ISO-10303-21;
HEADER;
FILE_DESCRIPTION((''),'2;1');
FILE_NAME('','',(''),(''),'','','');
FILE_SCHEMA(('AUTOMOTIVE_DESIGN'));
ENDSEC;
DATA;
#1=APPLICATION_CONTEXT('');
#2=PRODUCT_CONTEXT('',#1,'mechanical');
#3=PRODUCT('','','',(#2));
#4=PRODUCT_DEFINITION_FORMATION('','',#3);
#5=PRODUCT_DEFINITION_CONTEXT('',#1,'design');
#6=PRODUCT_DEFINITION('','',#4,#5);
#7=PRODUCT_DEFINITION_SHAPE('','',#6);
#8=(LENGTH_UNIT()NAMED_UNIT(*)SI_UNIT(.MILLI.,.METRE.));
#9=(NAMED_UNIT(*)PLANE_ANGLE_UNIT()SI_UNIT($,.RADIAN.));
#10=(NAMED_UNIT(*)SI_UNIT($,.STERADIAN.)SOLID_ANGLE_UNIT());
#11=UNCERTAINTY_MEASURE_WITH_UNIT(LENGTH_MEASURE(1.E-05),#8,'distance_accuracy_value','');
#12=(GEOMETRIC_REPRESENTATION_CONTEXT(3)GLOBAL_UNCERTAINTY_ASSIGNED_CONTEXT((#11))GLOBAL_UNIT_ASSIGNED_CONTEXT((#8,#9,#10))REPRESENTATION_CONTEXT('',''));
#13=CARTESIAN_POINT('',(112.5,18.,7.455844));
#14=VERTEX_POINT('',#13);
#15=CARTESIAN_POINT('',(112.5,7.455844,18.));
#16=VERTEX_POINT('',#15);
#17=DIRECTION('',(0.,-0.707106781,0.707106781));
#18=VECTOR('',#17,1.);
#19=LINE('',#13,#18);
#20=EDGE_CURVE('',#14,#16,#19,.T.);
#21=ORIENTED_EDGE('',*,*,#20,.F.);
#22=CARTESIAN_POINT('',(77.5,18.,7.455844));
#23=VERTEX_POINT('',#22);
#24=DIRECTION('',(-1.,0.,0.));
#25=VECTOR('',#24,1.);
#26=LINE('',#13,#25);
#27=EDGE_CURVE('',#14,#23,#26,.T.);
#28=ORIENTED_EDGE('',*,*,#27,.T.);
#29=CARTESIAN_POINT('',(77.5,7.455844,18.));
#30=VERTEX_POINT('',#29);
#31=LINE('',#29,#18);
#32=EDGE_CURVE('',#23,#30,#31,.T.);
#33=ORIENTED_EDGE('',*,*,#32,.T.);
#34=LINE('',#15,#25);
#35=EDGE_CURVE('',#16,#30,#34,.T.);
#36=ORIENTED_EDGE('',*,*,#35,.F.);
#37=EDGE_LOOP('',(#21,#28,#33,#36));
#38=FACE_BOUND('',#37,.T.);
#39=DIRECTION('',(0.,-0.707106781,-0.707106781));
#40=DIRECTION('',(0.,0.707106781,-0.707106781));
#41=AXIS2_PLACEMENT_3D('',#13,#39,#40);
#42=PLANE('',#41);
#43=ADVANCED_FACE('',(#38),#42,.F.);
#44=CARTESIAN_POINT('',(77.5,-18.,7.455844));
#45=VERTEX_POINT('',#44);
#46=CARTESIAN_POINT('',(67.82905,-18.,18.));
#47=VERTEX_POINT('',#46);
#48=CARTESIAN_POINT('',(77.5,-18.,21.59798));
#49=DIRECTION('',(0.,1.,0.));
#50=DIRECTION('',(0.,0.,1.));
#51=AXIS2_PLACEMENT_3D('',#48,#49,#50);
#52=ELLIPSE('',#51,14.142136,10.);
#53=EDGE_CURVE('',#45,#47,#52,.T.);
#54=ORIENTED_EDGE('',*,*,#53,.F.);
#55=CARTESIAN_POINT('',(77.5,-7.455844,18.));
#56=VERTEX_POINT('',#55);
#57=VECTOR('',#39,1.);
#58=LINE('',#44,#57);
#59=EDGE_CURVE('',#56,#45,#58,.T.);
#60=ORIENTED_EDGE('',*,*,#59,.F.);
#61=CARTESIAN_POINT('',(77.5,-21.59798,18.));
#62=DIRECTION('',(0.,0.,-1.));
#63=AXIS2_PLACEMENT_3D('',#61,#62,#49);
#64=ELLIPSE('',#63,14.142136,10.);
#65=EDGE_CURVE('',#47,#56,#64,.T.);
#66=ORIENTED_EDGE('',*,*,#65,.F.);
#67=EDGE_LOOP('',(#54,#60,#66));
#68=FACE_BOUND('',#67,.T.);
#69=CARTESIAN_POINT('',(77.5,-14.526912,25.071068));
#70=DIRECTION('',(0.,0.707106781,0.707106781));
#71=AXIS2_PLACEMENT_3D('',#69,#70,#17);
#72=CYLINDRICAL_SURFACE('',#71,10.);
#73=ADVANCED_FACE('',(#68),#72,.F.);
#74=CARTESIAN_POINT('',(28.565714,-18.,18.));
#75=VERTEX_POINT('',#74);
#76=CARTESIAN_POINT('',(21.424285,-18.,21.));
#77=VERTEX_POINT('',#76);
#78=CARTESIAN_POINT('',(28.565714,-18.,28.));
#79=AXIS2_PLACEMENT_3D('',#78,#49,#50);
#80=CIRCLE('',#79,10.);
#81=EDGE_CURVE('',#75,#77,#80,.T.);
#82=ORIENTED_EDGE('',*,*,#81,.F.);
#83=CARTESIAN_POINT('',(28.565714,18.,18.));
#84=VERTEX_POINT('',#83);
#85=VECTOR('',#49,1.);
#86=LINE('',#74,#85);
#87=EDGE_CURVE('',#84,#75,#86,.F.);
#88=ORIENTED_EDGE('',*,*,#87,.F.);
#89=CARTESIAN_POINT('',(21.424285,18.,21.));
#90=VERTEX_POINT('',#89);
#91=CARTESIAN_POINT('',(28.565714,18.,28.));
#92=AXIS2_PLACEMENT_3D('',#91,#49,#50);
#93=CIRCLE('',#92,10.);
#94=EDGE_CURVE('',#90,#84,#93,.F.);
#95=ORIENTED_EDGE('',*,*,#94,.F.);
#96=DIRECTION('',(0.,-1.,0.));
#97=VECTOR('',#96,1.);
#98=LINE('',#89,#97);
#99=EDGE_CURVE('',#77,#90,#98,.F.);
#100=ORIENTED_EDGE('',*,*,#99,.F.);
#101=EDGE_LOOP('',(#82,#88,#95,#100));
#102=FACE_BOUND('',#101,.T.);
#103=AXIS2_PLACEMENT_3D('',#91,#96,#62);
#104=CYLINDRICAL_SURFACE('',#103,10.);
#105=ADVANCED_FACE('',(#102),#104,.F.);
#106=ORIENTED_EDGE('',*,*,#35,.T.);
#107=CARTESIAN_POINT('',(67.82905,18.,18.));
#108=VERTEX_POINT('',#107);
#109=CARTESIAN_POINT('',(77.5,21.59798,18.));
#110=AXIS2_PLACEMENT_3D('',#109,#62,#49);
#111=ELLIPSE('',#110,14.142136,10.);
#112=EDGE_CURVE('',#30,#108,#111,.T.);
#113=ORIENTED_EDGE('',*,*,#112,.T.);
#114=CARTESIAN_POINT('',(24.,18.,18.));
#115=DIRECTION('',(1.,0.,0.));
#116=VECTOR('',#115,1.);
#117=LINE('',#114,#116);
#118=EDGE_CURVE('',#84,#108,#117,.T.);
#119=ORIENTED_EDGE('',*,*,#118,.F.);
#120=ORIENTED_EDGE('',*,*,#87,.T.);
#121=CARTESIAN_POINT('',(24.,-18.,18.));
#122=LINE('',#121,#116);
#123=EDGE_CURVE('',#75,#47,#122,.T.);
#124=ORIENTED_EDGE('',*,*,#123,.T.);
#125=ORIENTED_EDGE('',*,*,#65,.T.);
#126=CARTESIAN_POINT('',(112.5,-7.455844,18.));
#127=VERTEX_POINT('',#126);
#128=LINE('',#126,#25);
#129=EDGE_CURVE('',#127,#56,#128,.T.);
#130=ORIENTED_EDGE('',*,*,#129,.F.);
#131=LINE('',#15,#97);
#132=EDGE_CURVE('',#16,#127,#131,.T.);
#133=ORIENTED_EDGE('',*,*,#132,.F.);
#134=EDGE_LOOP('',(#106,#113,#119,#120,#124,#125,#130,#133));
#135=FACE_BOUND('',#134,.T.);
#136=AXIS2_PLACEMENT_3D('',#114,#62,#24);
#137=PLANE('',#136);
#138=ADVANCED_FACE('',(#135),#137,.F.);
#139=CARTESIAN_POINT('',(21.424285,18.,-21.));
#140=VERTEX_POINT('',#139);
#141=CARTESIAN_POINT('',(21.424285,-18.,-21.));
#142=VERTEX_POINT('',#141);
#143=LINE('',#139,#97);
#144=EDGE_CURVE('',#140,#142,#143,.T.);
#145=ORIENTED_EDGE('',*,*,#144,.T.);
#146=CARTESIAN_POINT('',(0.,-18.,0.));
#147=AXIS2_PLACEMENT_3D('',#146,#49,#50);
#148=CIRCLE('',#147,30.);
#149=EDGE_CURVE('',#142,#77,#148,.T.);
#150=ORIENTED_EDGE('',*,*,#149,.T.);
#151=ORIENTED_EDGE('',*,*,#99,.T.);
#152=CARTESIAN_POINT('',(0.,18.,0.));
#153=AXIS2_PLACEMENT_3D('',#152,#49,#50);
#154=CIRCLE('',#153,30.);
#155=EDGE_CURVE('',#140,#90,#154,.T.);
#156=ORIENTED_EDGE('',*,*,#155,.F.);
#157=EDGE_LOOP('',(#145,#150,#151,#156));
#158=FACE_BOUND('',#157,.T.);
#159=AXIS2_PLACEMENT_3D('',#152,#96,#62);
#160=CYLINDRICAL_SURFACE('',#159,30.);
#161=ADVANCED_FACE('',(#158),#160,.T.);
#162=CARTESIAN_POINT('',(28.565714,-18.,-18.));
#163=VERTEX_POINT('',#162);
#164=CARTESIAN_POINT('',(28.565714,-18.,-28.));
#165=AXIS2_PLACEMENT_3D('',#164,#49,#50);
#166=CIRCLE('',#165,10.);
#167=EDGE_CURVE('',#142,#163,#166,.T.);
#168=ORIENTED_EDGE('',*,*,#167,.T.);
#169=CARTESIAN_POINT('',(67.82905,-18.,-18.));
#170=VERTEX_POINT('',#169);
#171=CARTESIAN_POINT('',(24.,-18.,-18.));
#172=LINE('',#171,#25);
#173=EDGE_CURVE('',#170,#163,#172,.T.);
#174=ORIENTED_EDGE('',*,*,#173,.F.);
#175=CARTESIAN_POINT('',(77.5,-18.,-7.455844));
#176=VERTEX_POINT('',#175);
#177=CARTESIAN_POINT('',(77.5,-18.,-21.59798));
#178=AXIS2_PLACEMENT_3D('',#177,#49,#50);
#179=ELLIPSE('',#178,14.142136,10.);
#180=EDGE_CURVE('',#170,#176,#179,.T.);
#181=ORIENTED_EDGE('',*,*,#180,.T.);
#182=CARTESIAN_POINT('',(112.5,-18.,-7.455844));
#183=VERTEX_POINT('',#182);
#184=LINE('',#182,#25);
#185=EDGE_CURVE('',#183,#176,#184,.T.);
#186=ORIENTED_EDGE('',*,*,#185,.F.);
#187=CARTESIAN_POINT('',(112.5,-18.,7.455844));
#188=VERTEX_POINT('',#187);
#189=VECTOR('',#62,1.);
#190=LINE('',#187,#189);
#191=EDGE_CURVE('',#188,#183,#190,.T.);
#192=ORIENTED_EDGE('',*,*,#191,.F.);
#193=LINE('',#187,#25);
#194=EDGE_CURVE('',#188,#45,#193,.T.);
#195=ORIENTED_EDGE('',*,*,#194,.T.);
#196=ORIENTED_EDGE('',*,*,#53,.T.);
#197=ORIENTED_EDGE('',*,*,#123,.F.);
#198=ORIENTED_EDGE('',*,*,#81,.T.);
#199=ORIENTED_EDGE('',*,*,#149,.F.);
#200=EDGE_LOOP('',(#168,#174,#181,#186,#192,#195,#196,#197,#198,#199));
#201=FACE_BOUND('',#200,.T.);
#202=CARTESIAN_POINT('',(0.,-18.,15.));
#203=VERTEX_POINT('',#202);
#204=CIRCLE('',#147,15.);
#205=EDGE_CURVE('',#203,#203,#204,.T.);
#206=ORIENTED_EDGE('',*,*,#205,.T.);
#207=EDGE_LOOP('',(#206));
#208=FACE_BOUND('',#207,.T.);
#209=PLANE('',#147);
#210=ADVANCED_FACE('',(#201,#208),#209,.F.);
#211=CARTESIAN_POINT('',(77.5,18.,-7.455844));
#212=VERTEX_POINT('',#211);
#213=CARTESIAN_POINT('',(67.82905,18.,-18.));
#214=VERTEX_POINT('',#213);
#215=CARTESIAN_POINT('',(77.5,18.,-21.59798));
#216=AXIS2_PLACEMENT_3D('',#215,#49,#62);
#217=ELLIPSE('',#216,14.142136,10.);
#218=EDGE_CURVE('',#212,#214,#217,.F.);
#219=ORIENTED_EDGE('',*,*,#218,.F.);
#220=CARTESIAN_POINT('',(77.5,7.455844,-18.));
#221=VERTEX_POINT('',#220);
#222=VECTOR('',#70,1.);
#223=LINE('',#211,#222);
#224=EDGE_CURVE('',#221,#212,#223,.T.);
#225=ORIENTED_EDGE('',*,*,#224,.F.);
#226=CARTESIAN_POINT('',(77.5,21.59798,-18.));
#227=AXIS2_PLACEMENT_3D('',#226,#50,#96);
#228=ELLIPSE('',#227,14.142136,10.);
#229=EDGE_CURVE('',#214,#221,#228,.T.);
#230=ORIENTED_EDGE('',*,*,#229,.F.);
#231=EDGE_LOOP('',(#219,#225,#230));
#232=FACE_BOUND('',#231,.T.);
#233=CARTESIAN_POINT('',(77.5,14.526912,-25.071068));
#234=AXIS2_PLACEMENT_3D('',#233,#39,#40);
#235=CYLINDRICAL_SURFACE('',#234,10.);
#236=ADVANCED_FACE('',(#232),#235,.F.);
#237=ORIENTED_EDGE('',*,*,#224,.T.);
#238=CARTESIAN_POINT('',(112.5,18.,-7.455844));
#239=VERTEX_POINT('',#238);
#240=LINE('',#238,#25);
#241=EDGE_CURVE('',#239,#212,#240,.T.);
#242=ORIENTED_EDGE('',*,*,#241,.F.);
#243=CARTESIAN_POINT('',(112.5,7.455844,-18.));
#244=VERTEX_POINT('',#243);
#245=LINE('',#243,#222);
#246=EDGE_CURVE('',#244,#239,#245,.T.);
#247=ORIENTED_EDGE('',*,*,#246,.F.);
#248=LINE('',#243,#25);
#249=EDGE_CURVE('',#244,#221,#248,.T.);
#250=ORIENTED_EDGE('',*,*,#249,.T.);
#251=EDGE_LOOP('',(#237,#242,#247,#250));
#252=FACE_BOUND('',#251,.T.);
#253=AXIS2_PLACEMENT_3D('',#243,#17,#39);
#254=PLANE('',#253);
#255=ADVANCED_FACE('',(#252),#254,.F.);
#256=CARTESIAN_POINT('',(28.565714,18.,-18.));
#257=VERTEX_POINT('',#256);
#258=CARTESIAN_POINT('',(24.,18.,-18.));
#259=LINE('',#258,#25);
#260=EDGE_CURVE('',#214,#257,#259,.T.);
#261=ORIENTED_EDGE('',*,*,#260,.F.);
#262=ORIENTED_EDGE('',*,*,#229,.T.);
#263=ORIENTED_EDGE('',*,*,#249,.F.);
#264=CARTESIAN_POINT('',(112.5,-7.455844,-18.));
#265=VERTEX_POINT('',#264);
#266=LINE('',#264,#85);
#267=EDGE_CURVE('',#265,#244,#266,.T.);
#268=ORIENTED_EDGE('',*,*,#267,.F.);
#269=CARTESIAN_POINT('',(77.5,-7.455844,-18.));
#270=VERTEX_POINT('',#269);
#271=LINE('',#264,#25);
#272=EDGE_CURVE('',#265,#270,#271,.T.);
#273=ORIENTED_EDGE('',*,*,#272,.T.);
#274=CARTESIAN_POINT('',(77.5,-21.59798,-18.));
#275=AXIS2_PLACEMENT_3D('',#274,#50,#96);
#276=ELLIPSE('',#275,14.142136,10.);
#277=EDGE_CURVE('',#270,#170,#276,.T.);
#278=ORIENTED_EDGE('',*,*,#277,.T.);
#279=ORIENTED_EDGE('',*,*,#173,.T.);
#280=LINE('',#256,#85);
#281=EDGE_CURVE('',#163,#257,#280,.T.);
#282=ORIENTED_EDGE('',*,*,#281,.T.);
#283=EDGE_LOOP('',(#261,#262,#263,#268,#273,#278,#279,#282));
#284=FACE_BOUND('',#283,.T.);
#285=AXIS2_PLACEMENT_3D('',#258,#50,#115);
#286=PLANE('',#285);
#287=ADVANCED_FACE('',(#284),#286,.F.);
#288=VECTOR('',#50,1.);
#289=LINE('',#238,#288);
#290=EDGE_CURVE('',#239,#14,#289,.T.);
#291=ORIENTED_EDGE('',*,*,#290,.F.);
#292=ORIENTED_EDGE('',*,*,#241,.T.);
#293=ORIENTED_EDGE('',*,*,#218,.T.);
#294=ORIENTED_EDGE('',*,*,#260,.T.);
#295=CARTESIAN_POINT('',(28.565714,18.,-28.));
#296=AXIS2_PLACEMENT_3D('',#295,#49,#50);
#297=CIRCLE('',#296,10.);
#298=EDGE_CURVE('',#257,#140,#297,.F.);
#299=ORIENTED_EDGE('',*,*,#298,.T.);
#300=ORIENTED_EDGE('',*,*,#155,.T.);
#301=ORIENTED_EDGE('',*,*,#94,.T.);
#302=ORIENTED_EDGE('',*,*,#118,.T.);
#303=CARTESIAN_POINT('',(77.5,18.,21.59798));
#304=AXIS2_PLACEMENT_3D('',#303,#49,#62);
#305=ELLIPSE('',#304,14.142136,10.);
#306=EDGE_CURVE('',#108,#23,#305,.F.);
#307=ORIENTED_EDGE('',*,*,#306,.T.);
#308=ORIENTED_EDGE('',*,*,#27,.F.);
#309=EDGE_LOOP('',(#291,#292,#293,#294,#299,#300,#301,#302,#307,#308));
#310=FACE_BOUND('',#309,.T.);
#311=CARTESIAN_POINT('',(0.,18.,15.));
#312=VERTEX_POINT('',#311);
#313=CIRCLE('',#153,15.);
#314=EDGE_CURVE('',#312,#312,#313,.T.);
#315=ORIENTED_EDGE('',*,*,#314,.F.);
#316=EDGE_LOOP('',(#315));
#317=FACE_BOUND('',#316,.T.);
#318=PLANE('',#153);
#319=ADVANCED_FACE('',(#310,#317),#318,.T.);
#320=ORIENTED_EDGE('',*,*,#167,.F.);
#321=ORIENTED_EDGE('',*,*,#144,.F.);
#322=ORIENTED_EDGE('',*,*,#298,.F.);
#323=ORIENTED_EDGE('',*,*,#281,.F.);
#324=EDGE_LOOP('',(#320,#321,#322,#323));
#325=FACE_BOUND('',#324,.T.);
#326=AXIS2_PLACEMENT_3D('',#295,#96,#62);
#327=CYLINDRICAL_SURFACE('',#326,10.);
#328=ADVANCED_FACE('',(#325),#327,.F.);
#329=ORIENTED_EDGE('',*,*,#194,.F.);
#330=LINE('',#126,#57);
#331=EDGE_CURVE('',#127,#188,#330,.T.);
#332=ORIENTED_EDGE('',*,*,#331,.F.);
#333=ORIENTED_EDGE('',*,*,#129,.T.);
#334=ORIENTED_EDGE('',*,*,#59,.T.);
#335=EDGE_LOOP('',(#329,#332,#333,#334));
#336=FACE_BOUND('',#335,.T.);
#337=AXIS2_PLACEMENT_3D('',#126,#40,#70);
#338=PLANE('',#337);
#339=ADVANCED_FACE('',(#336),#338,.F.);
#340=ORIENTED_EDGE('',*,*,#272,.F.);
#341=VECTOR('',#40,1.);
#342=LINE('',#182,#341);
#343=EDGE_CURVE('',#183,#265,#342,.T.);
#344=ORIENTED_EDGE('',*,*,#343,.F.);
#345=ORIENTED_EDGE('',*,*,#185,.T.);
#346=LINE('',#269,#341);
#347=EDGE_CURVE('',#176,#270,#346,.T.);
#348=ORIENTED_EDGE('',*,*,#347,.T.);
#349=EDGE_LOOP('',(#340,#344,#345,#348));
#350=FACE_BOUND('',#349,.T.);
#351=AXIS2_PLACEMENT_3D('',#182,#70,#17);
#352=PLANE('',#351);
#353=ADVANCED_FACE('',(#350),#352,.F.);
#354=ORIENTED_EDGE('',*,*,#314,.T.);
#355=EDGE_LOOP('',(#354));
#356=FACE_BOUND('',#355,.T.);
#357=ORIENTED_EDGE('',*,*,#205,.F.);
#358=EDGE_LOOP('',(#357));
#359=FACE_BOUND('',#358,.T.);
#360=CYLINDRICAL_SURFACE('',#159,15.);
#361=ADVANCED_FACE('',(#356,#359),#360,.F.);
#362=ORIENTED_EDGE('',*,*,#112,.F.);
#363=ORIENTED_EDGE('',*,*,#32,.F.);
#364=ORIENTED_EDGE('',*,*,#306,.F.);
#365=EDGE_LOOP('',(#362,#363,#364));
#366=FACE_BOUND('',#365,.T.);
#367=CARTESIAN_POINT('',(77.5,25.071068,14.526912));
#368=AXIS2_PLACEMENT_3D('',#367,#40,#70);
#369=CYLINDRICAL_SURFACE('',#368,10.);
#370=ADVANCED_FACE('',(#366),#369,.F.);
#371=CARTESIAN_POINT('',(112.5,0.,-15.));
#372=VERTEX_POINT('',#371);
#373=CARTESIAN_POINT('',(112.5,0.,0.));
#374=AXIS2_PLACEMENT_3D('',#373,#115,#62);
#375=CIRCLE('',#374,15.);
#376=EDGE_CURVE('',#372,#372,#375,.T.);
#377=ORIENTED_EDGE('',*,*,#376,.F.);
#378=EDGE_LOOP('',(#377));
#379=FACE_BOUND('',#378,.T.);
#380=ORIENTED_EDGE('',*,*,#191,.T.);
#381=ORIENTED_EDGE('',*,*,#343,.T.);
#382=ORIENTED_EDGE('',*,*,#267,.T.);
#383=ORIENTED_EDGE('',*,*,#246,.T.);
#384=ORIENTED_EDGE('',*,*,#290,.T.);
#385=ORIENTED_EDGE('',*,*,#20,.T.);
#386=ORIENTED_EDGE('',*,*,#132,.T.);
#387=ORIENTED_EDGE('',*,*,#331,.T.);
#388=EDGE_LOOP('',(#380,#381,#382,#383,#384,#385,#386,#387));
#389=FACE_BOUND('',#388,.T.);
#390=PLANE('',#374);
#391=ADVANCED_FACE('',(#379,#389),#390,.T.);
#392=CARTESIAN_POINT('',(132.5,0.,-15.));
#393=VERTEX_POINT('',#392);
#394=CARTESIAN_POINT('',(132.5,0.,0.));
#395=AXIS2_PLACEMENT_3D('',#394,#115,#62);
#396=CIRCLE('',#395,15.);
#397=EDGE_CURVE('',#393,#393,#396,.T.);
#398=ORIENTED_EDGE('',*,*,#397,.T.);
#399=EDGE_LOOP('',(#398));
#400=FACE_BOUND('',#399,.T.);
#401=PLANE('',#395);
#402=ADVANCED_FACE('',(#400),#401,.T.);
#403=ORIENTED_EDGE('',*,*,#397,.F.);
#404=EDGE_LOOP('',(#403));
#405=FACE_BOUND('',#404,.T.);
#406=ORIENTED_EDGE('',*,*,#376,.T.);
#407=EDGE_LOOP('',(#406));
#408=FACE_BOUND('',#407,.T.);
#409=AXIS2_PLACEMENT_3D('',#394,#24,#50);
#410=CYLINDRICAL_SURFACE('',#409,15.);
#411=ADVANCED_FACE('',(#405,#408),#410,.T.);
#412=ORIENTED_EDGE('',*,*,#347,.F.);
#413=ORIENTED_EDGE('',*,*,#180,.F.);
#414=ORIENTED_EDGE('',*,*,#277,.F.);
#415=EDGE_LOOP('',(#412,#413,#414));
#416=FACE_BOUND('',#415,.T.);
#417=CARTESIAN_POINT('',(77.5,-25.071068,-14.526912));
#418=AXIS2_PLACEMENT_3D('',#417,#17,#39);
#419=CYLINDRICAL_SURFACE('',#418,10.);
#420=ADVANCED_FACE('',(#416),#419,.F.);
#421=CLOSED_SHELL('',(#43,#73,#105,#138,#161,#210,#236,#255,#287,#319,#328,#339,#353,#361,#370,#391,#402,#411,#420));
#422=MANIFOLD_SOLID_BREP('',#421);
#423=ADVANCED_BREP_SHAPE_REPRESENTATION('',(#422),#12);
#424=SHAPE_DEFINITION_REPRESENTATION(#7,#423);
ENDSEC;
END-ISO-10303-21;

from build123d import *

# Parameters (mm, degrees)
CROQUIS1_R              = 15
SALIENTE_EXTRUIR1_DEPTH = 18
SALIENTE_EXTRUIR2_DEPTH = 45
CROQUIS3_R              = 15
SALIENTE_EXTRUIR3_DEPTH = 20
REDONDEO1_R             = 10
REDONDEO2_R             = 10


with BuildPart() as part:
    # Croquis1 → Saliente-Extruir1 (new, symmetric)
    with BuildSketch(Plane(origin=(0, 0, 0), x_dir=(1, 0, 0), z_dir=(0, 1, 0))):
        with BuildLine():
            Line((24, 18), (67.5, 18))
            Line((67.5, 18), (67.5, -18))
            Line((67.5, -18), (24, -18))
            ThreePointArc((24, -18), (-30, 0), (24, 18))
        make_face()
        with Locations(Location((0, 0, 0), (0, 0, 270))):
            Circle(CROQUIS1_R, mode=Mode.SUBTRACT)
    extrude(amount=SALIENTE_EXTRUIR1_DEPTH, both=True)

    # Croquis2 → Saliente-Extruir2 (add)
    with BuildSketch(Plane(origin=(67.5, 0, 0), x_dir=(0, 0, -1), z_dir=(1, 0, 0))):
        Polygon((-18, 7.455844123), (-18, -7.455844123), (-7.455844123, -18), (7.455844123, -18), (18, -7.455844123), (18, 7.455844123), (7.455844123, 18), (-7.455844123, 18), align=None)
    extrude(amount=SALIENTE_EXTRUIR2_DEPTH)

    # Croquis3 → Saliente-Extruir3 (add)
    with BuildSketch(Plane(origin=(112.5, 0, 0), x_dir=(0, 0, -1), z_dir=(1, 0, 0))):
        Circle(CROQUIS3_R)
    extrude(amount=SALIENTE_EXTRUIR3_DEPTH)

    # Redondeo1
    # the kernel refuses this fillet: 10 mm, written as the material it adds along each edge
    with BuildSketch(Plane(origin=(67.5, 10.221825407, 35.67766953), x_dir=(1, 0, 0), z_dir=(0, -0.7071067811865474, -0.7071067811865477))) as redondeo1_piece_1_section:
        with BuildLine():
            CenterArc((REDONDEO1_R, REDONDEO1_R), REDONDEO1_R, 180, 90)
            Line((0, REDONDEO1_R), (0, 0))
            Line((0, 0), (REDONDEO1_R, 0))
        make_face()
    redondeo1_piece_1 = extrude(amount=64.911688245, mode=Mode.PRIVATE)
    redondeo1_piece_1 = split(redondeo1_piece_1, bisect_by=Plane(origin=(70.275136412, -18, 13.729156697), z_dir=(0, 1, 0)), keep=Keep.TOP, mode=Mode.PRIVATE)
    redondeo1_piece_1 = split(redondeo1_piece_1, bisect_by=Plane(origin=(70.275136412, -13.729156697, 18), z_dir=(0, 0, -1)), keep=Keep.TOP, mode=Mode.PRIVATE)
    add(redondeo1_piece_1)
    with BuildSketch(Plane(origin=(67.5, -35.67766953, 10.221825407), x_dir=(0, -0.7071067811865476, -0.7071067811865476), z_dir=(0, 0.7071067811865475, -0.7071067811865476))) as redondeo1_piece_2_section:
        with BuildLine():
            CenterArc((REDONDEO1_R, -REDONDEO1_R), REDONDEO1_R, 90, 90)
            Line((0, -REDONDEO1_R), (0, 0))
            Line((0, 0), (REDONDEO1_R, 0))
        make_face()
    redondeo1_piece_2 = extrude(amount=64.911688245, mode=Mode.PRIVATE)
    redondeo1_piece_2 = split(redondeo1_piece_2, bisect_by=Plane(origin=(70.275136413, -13.729156697, -18), z_dir=(0, 0, 1)), keep=Keep.TOP, mode=Mode.PRIVATE)
    redondeo1_piece_2 = split(redondeo1_piece_2, bisect_by=Plane(origin=(70.275136413, -18, -13.729156697), z_dir=(0, 1, 0)), keep=Keep.TOP, mode=Mode.PRIVATE)
    add(redondeo1_piece_2)
    with BuildSketch(Plane(origin=(67.5, -10.221825407, -35.67766953), x_dir=(1, 0, 0), z_dir=(0, 0.7071067811865477, 0.7071067811865474))) as redondeo1_piece_3_section:
        with BuildLine():
            CenterArc((REDONDEO1_R, REDONDEO1_R), REDONDEO1_R, 180, 90)
            Line((0, REDONDEO1_R), (0, 0))
            Line((0, 0), (REDONDEO1_R, 0))
        make_face()
    redondeo1_piece_3 = extrude(amount=64.911688245, mode=Mode.PRIVATE)
    redondeo1_piece_3 = split(redondeo1_piece_3, bisect_by=Plane(origin=(70.275136412, 13.729156697, -18), z_dir=(0, 0, 1)), keep=Keep.TOP, mode=Mode.PRIVATE)
    redondeo1_piece_3 = split(redondeo1_piece_3, bisect_by=Plane(origin=(70.275136412, 18, -13.729156697), z_dir=(0, -1, 0)), keep=Keep.TOP, mode=Mode.PRIVATE)
    add(redondeo1_piece_3)
    with BuildSketch(Plane(origin=(67.5, 35.67766953, -10.221825407), x_dir=(1, 0, 0), z_dir=(0, -0.7071067811865476, 0.7071067811865476))) as redondeo1_piece_4_section:
        with BuildLine():
            CenterArc((REDONDEO1_R, REDONDEO1_R), REDONDEO1_R, 180, 90)
            Line((0, REDONDEO1_R), (0, 0))
            Line((0, 0), (REDONDEO1_R, 0))
        make_face()
    redondeo1_piece_4 = extrude(amount=64.911688245, mode=Mode.PRIVATE)
    redondeo1_piece_4 = split(redondeo1_piece_4, bisect_by=Plane(origin=(70.275136412, 18, 13.729156697), z_dir=(0, -1, 0)), keep=Keep.TOP, mode=Mode.PRIVATE)
    redondeo1_piece_4 = split(redondeo1_piece_4, bisect_by=Plane(origin=(70.275136412, 13.729156697, 18), z_dir=(0, 0, -1)), keep=Keep.TOP, mode=Mode.PRIVATE)
    add(redondeo1_piece_4)

    # Redondeo2
    redondeo2_edges = [part.edges().sort_by_distance(p)[0] for p in [
        (24, 0, 18),
        (24, 0, -18),
    ]]
    fillet(redondeo2_edges, radius=REDONDEO2_R)


solid = part.part
